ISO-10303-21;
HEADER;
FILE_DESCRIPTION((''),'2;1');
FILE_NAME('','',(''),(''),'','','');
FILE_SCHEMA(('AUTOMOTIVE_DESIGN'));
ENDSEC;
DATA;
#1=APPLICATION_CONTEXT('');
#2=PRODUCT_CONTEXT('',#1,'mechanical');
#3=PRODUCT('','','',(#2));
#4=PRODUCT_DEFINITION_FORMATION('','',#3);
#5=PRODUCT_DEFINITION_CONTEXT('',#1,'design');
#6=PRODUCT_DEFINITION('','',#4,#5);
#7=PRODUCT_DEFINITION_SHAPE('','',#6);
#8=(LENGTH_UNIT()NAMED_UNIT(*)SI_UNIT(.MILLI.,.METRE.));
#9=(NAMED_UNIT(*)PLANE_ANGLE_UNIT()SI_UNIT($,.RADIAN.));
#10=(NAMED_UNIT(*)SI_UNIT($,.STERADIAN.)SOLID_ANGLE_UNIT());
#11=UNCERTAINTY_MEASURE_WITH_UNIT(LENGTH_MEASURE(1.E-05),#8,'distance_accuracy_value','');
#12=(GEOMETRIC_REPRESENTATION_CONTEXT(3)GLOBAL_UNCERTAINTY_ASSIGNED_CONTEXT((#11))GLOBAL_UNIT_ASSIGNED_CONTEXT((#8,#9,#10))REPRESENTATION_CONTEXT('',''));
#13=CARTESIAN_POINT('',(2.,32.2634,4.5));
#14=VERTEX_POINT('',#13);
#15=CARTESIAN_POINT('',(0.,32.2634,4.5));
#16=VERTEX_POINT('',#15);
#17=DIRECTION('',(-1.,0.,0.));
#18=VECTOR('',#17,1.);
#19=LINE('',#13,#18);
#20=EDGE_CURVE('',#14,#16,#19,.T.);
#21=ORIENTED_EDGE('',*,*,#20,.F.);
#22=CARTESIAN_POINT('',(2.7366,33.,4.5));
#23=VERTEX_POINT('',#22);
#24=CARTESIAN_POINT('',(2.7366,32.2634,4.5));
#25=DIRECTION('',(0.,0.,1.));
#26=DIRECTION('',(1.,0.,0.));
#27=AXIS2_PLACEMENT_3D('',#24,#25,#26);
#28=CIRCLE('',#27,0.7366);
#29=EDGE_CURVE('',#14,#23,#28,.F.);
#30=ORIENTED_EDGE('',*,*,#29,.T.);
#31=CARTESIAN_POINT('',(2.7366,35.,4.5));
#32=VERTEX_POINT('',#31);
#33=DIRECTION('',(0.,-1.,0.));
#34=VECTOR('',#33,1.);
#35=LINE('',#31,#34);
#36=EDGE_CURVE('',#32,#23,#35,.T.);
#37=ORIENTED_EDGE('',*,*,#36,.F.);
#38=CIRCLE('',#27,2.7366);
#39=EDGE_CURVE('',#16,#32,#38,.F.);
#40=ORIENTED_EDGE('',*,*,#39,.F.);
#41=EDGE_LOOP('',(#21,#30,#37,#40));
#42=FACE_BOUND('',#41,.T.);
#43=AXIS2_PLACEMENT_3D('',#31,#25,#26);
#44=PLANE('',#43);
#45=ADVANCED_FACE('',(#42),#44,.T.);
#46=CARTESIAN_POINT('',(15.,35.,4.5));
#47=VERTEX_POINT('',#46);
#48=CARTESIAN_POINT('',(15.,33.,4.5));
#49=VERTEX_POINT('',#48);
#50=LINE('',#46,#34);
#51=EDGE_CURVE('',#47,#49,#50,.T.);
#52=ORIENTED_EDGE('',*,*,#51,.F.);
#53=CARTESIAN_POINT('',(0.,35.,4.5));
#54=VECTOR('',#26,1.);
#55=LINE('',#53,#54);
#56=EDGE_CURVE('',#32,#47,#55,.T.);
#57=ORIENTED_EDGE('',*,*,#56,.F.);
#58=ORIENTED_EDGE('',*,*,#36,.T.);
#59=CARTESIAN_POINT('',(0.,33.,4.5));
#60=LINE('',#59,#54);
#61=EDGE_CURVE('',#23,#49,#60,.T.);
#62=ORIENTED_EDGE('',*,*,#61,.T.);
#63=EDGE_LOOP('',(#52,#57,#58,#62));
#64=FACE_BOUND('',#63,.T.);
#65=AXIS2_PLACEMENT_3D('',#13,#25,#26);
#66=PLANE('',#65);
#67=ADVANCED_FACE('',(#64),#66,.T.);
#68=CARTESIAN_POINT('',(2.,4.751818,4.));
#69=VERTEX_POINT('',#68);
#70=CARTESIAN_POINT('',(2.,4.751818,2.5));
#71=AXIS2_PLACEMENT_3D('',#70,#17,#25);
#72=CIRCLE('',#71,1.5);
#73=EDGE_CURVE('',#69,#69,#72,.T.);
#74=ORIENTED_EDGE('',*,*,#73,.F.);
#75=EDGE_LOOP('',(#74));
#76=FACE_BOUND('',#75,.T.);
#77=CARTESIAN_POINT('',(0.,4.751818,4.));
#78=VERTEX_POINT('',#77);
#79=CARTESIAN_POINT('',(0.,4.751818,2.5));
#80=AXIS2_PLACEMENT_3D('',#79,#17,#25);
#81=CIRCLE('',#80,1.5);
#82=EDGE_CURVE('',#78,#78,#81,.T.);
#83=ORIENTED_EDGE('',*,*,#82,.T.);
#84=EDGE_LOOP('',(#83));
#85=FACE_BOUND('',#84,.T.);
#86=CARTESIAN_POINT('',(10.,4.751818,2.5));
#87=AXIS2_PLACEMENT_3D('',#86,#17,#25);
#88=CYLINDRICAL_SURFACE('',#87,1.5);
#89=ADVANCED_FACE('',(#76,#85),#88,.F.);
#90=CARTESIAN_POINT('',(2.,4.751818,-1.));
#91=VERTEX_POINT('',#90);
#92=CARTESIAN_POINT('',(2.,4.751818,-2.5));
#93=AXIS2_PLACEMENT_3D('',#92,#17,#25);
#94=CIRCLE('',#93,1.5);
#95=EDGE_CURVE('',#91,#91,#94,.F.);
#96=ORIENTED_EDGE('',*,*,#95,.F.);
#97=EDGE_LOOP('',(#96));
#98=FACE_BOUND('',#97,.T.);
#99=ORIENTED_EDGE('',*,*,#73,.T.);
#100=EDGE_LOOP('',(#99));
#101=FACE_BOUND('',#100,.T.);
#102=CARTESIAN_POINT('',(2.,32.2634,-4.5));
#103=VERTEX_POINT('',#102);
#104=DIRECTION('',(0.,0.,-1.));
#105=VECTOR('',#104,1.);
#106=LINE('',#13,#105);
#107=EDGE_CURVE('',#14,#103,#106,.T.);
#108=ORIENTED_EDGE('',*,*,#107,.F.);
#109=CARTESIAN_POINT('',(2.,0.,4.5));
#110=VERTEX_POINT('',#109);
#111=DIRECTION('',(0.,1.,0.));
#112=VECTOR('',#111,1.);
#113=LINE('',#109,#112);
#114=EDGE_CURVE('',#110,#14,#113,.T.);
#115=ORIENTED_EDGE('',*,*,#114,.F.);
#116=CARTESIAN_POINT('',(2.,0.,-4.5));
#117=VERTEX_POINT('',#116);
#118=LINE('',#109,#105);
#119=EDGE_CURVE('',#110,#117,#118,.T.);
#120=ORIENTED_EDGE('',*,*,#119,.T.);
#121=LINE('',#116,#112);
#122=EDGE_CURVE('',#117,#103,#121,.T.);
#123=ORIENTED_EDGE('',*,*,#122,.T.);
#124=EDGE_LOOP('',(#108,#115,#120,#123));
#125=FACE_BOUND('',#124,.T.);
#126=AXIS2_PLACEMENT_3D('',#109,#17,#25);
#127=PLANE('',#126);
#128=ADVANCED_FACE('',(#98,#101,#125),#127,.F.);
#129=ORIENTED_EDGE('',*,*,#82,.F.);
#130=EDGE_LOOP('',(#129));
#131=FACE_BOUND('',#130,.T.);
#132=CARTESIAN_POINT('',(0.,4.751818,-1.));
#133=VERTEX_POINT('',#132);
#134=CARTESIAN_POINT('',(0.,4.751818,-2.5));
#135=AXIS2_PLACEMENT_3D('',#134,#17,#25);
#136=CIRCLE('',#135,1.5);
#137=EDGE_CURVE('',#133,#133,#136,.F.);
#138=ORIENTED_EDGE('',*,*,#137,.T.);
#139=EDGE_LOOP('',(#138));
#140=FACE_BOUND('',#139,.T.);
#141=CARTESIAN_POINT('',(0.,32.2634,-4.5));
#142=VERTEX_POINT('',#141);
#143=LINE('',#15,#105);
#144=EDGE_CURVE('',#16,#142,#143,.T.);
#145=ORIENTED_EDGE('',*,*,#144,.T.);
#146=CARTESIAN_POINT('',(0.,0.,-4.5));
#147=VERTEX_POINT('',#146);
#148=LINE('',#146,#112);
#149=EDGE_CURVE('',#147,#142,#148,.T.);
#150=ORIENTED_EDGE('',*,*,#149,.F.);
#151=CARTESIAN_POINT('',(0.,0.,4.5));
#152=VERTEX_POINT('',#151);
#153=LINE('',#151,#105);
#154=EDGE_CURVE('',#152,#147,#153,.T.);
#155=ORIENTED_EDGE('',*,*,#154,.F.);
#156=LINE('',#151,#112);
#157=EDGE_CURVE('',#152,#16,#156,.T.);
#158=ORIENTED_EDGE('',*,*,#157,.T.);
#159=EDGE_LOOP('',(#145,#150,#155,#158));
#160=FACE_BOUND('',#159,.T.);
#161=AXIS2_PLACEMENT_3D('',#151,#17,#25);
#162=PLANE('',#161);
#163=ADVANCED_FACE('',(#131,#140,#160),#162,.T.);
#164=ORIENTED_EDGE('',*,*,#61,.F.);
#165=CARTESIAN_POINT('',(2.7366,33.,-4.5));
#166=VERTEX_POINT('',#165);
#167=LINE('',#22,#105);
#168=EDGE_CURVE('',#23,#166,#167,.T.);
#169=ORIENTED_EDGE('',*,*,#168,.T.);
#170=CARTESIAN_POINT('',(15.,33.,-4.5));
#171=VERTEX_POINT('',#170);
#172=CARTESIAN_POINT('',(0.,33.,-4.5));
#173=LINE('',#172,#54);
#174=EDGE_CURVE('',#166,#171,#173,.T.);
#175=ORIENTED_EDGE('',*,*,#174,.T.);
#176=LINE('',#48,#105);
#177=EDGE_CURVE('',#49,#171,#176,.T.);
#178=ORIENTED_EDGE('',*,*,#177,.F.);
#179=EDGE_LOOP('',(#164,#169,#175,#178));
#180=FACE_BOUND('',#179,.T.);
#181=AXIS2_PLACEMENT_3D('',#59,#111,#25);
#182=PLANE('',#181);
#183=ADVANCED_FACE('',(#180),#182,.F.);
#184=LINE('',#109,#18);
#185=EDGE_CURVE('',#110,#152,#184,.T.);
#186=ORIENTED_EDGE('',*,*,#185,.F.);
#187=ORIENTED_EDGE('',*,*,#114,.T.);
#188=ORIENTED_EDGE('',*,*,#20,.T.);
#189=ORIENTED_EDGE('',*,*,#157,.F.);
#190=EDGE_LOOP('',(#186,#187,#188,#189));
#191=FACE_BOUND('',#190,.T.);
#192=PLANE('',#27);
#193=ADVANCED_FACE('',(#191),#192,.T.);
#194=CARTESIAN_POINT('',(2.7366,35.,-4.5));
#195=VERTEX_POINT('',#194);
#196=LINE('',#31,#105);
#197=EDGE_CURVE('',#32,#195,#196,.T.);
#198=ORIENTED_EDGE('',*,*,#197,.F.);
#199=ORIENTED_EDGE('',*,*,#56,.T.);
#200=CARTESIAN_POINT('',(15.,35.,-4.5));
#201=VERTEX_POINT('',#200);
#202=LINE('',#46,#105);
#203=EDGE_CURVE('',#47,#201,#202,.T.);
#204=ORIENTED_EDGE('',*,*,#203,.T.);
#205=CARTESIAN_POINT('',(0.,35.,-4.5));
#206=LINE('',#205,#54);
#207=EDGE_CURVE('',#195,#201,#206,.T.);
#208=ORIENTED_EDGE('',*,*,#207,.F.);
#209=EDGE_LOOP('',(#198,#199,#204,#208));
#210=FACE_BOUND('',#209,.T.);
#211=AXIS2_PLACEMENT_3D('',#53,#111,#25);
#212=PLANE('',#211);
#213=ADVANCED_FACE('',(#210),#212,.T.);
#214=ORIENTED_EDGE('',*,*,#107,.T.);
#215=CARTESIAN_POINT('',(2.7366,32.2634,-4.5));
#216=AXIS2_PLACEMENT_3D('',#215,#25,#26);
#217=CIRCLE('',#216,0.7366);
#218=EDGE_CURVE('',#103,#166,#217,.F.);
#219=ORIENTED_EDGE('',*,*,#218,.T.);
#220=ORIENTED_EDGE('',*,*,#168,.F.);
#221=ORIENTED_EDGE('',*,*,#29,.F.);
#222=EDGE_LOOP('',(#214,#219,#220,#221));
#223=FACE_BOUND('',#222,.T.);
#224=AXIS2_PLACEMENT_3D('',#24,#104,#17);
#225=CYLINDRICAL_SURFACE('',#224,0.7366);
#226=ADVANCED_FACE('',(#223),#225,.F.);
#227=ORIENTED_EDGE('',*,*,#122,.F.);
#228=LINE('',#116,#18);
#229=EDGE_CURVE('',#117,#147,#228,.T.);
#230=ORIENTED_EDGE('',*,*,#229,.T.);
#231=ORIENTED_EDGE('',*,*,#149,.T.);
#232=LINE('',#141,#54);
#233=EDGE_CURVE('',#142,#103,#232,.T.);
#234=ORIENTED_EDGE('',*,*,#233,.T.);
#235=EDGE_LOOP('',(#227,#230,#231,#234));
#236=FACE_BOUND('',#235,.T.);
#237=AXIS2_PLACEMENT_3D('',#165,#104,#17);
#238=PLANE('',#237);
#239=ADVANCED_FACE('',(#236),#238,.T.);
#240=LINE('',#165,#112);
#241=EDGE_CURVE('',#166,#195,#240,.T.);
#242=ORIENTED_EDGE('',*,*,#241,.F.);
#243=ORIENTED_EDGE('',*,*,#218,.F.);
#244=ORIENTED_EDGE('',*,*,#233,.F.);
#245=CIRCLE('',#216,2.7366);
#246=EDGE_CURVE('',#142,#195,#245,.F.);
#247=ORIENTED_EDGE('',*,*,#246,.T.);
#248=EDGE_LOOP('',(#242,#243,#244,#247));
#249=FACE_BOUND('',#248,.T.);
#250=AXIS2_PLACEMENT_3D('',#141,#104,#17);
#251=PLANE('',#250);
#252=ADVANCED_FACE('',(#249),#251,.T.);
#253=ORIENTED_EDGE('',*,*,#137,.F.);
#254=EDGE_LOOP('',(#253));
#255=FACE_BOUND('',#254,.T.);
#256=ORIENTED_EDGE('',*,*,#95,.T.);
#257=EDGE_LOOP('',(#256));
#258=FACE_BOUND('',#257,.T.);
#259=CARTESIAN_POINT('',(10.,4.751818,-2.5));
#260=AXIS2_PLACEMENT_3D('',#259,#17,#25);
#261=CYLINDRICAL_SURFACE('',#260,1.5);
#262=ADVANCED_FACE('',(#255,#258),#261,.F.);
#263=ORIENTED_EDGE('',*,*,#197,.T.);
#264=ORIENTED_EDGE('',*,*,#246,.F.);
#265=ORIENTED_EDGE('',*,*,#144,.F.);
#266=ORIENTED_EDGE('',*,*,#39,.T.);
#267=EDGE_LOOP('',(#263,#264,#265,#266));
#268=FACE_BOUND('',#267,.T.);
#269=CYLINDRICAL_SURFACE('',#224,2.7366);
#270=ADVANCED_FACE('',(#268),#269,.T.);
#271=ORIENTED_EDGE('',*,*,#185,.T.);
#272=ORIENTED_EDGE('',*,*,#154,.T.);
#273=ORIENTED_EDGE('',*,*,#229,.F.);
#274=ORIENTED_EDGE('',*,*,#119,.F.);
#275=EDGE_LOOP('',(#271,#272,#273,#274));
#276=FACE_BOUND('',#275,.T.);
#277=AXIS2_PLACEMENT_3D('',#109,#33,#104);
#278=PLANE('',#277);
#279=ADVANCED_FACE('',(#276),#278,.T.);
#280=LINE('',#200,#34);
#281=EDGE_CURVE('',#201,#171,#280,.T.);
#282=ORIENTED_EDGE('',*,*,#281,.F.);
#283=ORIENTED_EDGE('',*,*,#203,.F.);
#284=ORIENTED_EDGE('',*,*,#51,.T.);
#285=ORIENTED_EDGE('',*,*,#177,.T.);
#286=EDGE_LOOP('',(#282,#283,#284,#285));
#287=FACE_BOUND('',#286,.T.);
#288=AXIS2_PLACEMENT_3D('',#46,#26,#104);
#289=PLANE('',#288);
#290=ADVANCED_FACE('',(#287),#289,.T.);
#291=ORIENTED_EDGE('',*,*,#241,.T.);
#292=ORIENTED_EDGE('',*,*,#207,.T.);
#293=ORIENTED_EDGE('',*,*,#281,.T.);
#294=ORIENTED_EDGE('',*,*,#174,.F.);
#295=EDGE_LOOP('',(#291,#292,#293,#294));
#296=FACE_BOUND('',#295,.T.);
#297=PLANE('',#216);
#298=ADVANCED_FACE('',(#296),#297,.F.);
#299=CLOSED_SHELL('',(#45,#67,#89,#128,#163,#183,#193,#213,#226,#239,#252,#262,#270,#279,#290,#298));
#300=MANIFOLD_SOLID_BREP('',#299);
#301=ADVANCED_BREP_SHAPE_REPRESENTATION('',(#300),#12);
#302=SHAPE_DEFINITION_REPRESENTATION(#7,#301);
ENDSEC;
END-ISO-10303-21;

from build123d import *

# Parameters (mm, degrees)
SM_BASE_FLANGE_1_DEPTH = 4.5
SKETCH_6_R             = 1.5
CUT_EXTRUDE_1_DEPTH    = 10


# Sheet-metal steps are written as plain solids
with BuildPart() as part:
    # Sketch 1 → 基体-法兰1 (new, symmetric)
    with BuildSketch(Plane.XY):
        with BuildLine():
            Line((0, 0), (0, 32.2634))
            ThreePointArc((0, 32.2634), (0.801531583, 34.198468417), (2.7366, 35))
            Line((2.7366, 35), (15, 35))
            Line((15, 35), (15, 33))
            Line((15, 33), (2.7366, 33))
            ThreePointArc((2.7366, 33), (2.215745145, 32.784254855), (2, 32.2634))
            Line((2, 32.2634), (2, 0))
            Line((2, 0), (0, 0))
        make_face()
    extrude(amount=SM_BASE_FLANGE_1_DEPTH, both=True)

    # 草图6 → 切除-拉伸1 (cut)
    with BuildSketch(Plane.ZY):
        with Locations((2.5, 4.75181822)):
            Circle(SKETCH_6_R)
        with Locations((-2.5, 4.75181822)):
            Circle(SKETCH_6_R)
    extrude(amount=-CUT_EXTRUDE_1_DEPTH, mode=Mode.SUBTRACT)


solid = part.part
